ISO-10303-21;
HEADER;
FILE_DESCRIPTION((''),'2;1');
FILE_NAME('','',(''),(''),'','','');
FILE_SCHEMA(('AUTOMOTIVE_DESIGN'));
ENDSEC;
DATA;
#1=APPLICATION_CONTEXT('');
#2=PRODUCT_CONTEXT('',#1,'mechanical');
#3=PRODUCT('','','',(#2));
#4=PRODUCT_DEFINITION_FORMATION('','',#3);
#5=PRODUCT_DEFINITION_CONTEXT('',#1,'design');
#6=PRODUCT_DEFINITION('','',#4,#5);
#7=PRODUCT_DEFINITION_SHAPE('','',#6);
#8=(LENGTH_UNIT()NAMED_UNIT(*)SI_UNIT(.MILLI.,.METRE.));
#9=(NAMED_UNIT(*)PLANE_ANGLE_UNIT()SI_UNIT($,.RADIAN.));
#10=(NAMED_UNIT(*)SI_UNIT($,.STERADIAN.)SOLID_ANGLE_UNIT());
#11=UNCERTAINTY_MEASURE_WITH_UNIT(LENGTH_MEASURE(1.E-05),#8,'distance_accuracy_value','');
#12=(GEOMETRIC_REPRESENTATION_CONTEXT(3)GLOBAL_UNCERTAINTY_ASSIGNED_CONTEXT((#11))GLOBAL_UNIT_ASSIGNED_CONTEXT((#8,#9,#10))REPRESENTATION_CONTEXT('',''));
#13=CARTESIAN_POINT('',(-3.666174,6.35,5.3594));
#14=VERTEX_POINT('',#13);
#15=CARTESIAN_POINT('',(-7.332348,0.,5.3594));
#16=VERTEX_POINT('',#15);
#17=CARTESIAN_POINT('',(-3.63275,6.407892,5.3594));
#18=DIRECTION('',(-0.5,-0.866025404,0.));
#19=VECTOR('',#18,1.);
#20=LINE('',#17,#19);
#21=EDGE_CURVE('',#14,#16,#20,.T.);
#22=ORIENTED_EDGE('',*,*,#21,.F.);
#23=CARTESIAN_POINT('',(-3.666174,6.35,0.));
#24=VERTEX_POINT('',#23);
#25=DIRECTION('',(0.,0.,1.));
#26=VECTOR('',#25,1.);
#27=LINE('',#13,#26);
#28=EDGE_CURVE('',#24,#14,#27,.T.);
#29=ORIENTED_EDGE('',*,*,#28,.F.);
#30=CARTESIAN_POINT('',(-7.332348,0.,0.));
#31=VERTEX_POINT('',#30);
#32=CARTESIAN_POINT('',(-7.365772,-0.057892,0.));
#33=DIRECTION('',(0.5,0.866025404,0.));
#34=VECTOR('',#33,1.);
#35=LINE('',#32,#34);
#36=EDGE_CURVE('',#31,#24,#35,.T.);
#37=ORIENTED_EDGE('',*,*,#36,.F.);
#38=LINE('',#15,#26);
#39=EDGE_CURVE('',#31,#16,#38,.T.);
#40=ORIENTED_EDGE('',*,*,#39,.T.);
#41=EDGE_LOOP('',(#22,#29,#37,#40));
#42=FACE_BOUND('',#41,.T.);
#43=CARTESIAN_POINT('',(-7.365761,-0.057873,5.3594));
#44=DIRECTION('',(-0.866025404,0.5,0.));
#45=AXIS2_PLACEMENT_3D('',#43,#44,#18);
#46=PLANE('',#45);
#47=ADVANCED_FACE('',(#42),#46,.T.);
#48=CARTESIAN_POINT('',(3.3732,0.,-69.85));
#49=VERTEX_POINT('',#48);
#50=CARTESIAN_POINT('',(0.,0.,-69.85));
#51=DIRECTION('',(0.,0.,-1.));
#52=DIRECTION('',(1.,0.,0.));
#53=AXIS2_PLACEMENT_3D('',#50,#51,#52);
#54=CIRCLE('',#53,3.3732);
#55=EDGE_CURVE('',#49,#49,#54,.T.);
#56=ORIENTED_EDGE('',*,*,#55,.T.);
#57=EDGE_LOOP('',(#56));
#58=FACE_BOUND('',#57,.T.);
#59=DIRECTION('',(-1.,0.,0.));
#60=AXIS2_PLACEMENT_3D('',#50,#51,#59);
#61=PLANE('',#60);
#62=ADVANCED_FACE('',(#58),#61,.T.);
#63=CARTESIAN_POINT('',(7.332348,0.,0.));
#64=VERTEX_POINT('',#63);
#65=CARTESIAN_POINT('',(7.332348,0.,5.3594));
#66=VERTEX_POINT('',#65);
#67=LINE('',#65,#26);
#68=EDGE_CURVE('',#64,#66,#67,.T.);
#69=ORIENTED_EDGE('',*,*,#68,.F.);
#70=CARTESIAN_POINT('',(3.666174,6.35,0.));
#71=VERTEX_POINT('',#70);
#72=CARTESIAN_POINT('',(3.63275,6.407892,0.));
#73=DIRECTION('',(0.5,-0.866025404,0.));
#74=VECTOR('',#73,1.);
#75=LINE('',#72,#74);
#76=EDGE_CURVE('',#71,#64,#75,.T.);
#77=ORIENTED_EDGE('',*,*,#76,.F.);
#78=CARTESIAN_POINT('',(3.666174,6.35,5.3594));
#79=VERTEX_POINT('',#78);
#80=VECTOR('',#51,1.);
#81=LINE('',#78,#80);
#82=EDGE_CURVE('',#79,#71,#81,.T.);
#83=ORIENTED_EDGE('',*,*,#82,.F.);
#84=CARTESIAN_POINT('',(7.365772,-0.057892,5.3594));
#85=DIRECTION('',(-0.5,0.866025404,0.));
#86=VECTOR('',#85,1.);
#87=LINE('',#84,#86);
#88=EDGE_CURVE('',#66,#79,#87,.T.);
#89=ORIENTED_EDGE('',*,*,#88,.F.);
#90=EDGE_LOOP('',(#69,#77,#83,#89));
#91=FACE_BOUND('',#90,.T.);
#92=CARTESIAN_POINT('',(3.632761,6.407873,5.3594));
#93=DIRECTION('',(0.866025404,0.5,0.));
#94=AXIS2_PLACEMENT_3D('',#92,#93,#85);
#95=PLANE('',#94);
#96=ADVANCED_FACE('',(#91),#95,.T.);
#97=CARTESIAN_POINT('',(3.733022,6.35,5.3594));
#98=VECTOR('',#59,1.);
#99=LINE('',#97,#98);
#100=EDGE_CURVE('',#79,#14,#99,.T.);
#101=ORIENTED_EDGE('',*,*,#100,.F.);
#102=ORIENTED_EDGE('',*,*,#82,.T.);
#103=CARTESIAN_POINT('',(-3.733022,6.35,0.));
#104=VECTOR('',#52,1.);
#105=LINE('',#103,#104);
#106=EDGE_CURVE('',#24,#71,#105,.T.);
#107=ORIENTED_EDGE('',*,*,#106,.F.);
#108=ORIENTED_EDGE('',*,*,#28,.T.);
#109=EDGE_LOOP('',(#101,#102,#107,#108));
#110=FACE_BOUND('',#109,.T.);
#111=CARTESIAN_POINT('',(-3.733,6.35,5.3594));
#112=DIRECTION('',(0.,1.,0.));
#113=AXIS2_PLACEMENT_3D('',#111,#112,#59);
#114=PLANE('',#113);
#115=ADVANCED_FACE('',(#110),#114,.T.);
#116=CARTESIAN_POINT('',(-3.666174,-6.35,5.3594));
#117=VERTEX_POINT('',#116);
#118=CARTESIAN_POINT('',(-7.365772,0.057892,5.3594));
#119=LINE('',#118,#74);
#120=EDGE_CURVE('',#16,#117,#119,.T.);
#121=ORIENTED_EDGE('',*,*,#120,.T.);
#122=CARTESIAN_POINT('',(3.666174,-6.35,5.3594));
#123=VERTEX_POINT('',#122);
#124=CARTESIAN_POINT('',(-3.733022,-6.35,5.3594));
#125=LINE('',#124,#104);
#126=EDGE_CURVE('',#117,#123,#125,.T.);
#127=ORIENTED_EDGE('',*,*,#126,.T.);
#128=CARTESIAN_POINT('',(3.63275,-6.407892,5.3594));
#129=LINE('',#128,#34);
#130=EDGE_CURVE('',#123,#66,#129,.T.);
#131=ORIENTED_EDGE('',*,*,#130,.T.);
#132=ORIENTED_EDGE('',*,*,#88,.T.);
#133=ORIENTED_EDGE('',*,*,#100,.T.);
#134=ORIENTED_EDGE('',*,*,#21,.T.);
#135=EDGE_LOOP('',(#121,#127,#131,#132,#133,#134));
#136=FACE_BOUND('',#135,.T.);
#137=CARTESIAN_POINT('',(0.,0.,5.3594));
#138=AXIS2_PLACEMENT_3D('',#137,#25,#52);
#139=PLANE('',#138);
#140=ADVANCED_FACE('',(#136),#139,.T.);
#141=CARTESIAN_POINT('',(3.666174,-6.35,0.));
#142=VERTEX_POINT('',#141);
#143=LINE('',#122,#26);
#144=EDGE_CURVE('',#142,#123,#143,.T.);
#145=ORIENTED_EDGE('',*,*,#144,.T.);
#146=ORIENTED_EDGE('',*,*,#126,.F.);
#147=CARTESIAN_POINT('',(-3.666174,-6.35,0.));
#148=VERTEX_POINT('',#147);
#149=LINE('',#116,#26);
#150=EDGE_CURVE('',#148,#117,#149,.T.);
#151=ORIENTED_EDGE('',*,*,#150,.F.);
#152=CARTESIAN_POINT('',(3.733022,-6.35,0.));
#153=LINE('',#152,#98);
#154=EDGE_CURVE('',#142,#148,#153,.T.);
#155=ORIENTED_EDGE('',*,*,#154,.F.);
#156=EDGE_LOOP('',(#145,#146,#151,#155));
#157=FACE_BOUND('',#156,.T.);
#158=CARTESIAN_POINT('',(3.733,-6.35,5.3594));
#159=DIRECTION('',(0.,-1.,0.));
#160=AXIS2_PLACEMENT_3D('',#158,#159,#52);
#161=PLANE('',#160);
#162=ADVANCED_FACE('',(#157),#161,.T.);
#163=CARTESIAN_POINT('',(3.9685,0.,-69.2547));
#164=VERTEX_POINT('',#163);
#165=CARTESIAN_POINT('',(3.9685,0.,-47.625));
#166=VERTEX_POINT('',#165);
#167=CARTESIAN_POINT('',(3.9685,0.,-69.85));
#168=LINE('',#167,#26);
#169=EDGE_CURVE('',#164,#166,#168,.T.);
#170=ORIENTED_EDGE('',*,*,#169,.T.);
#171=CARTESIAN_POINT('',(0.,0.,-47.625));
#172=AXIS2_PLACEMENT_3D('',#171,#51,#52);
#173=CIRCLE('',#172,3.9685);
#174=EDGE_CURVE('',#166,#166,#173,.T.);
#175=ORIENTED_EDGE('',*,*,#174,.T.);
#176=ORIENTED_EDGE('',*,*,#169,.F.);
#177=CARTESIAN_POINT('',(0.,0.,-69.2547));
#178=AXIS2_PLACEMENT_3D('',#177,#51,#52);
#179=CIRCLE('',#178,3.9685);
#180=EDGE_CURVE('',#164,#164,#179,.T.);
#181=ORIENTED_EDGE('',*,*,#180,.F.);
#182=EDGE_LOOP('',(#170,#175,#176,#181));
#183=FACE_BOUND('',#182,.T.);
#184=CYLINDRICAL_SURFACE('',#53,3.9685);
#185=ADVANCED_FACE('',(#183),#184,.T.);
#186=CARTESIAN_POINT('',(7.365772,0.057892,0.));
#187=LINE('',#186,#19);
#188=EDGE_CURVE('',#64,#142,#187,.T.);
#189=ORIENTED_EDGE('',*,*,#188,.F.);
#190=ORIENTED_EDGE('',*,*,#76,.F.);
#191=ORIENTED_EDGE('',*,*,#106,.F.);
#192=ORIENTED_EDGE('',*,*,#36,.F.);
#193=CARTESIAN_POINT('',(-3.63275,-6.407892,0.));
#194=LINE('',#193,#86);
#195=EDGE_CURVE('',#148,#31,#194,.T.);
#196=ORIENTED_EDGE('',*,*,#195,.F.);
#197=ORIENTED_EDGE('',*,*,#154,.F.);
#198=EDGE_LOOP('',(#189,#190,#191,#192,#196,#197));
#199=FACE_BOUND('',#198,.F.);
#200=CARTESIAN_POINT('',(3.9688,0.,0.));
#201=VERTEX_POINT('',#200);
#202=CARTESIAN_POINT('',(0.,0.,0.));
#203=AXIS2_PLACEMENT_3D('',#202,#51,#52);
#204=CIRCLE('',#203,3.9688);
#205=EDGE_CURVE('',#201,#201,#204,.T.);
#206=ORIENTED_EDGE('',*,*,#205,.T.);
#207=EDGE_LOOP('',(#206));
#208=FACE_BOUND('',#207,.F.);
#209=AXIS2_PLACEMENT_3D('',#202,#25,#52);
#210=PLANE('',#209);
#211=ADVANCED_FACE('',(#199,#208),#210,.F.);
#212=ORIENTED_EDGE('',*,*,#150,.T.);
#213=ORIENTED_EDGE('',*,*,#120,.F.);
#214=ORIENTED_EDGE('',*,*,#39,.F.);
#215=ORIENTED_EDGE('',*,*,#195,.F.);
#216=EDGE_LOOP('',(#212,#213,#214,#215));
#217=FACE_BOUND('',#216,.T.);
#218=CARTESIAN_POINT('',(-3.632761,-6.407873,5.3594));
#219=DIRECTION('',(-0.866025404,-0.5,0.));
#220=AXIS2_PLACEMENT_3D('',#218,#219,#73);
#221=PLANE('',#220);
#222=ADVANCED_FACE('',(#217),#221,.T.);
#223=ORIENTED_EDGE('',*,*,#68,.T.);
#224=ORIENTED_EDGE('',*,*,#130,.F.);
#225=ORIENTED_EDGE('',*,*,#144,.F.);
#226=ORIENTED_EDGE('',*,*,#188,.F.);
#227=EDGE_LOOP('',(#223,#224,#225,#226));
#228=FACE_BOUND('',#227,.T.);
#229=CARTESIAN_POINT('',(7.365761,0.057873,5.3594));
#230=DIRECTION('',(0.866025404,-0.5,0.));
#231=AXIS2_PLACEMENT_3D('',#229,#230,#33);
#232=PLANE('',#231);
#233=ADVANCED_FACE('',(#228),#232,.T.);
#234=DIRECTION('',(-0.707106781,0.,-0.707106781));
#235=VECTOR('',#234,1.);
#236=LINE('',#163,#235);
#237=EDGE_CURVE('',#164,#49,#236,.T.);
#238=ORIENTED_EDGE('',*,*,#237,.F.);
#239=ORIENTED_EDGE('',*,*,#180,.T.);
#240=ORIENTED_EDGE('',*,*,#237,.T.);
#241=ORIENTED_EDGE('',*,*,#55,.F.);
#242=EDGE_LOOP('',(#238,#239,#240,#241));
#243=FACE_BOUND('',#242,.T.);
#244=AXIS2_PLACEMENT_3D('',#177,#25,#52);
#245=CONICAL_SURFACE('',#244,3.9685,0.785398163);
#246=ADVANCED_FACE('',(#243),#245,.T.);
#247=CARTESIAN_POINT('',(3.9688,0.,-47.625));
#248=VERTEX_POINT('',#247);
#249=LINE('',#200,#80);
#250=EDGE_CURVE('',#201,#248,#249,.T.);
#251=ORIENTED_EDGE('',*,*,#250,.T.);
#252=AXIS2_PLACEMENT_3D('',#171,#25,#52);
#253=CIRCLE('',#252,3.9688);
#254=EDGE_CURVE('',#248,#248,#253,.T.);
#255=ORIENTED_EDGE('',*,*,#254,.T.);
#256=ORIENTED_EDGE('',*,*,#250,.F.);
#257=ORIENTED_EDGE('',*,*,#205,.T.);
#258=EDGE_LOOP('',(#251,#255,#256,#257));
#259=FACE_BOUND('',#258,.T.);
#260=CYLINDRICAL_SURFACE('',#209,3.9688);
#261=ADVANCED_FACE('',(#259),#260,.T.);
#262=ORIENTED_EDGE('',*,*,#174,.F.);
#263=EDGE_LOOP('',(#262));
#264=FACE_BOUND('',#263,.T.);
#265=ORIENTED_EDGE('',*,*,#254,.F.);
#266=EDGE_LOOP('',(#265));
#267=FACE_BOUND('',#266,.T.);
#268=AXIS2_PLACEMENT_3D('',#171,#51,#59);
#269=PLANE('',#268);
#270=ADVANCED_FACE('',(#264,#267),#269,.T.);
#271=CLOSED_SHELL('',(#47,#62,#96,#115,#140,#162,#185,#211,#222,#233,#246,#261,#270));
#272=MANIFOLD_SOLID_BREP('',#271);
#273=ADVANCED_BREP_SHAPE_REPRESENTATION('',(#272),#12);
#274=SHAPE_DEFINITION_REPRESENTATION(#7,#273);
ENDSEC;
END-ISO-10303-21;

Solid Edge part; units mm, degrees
sketch "Sketch1" plane through (0, 0, 0) normal (0, 0, 1) x (1, 0, 0)
  circle A0 centre (0, 0) radius 7.366
  dimension "D1" = 14.732
extrude "Protrusion1" add sketch "Sketch1" along normal blind 5.3594
sketch "Sketch2" plane through (0, 0, 0) normal (0, 0, -1) x (1, 0, 0)
  circle A0 centre (0, 0) radius 3.9688
extrude "Protrusion2" add sketch "Sketch2" along normal blind 69.85
sketch "Sketch3" plane through (0, 0, -69.85) normal (0, 0, -1) x (1, 0, 0)
  circle A0 centre (0, 0) radius 3.9685
extrude "Cutout1" cut sketch "Sketch3" against normal blind 22.225 flip side to cut
chamfer "Chamfer_1" distance 0.5953 angle 45 1 edges at (-3.9685, 0, -69.85)
sketch "Sketch4" plane through (0, 0, 5.3594) normal (0, 0, 1) x (1, 0, 0)
  line L0 (-3.733, 6.35) -> (3.733, 6.35)
  dimension "D1" = 12.7
extrude "Cutout2" cut sketch "Sketch4" against normal up to next material side at (0, 6.4, 5.3594)
pattern_circular "Pattern1" count 6 over 360 about axis through (0, 0, 5.3594) along (0, 0, 1) of "Cutout2"
properties part number "117613"
